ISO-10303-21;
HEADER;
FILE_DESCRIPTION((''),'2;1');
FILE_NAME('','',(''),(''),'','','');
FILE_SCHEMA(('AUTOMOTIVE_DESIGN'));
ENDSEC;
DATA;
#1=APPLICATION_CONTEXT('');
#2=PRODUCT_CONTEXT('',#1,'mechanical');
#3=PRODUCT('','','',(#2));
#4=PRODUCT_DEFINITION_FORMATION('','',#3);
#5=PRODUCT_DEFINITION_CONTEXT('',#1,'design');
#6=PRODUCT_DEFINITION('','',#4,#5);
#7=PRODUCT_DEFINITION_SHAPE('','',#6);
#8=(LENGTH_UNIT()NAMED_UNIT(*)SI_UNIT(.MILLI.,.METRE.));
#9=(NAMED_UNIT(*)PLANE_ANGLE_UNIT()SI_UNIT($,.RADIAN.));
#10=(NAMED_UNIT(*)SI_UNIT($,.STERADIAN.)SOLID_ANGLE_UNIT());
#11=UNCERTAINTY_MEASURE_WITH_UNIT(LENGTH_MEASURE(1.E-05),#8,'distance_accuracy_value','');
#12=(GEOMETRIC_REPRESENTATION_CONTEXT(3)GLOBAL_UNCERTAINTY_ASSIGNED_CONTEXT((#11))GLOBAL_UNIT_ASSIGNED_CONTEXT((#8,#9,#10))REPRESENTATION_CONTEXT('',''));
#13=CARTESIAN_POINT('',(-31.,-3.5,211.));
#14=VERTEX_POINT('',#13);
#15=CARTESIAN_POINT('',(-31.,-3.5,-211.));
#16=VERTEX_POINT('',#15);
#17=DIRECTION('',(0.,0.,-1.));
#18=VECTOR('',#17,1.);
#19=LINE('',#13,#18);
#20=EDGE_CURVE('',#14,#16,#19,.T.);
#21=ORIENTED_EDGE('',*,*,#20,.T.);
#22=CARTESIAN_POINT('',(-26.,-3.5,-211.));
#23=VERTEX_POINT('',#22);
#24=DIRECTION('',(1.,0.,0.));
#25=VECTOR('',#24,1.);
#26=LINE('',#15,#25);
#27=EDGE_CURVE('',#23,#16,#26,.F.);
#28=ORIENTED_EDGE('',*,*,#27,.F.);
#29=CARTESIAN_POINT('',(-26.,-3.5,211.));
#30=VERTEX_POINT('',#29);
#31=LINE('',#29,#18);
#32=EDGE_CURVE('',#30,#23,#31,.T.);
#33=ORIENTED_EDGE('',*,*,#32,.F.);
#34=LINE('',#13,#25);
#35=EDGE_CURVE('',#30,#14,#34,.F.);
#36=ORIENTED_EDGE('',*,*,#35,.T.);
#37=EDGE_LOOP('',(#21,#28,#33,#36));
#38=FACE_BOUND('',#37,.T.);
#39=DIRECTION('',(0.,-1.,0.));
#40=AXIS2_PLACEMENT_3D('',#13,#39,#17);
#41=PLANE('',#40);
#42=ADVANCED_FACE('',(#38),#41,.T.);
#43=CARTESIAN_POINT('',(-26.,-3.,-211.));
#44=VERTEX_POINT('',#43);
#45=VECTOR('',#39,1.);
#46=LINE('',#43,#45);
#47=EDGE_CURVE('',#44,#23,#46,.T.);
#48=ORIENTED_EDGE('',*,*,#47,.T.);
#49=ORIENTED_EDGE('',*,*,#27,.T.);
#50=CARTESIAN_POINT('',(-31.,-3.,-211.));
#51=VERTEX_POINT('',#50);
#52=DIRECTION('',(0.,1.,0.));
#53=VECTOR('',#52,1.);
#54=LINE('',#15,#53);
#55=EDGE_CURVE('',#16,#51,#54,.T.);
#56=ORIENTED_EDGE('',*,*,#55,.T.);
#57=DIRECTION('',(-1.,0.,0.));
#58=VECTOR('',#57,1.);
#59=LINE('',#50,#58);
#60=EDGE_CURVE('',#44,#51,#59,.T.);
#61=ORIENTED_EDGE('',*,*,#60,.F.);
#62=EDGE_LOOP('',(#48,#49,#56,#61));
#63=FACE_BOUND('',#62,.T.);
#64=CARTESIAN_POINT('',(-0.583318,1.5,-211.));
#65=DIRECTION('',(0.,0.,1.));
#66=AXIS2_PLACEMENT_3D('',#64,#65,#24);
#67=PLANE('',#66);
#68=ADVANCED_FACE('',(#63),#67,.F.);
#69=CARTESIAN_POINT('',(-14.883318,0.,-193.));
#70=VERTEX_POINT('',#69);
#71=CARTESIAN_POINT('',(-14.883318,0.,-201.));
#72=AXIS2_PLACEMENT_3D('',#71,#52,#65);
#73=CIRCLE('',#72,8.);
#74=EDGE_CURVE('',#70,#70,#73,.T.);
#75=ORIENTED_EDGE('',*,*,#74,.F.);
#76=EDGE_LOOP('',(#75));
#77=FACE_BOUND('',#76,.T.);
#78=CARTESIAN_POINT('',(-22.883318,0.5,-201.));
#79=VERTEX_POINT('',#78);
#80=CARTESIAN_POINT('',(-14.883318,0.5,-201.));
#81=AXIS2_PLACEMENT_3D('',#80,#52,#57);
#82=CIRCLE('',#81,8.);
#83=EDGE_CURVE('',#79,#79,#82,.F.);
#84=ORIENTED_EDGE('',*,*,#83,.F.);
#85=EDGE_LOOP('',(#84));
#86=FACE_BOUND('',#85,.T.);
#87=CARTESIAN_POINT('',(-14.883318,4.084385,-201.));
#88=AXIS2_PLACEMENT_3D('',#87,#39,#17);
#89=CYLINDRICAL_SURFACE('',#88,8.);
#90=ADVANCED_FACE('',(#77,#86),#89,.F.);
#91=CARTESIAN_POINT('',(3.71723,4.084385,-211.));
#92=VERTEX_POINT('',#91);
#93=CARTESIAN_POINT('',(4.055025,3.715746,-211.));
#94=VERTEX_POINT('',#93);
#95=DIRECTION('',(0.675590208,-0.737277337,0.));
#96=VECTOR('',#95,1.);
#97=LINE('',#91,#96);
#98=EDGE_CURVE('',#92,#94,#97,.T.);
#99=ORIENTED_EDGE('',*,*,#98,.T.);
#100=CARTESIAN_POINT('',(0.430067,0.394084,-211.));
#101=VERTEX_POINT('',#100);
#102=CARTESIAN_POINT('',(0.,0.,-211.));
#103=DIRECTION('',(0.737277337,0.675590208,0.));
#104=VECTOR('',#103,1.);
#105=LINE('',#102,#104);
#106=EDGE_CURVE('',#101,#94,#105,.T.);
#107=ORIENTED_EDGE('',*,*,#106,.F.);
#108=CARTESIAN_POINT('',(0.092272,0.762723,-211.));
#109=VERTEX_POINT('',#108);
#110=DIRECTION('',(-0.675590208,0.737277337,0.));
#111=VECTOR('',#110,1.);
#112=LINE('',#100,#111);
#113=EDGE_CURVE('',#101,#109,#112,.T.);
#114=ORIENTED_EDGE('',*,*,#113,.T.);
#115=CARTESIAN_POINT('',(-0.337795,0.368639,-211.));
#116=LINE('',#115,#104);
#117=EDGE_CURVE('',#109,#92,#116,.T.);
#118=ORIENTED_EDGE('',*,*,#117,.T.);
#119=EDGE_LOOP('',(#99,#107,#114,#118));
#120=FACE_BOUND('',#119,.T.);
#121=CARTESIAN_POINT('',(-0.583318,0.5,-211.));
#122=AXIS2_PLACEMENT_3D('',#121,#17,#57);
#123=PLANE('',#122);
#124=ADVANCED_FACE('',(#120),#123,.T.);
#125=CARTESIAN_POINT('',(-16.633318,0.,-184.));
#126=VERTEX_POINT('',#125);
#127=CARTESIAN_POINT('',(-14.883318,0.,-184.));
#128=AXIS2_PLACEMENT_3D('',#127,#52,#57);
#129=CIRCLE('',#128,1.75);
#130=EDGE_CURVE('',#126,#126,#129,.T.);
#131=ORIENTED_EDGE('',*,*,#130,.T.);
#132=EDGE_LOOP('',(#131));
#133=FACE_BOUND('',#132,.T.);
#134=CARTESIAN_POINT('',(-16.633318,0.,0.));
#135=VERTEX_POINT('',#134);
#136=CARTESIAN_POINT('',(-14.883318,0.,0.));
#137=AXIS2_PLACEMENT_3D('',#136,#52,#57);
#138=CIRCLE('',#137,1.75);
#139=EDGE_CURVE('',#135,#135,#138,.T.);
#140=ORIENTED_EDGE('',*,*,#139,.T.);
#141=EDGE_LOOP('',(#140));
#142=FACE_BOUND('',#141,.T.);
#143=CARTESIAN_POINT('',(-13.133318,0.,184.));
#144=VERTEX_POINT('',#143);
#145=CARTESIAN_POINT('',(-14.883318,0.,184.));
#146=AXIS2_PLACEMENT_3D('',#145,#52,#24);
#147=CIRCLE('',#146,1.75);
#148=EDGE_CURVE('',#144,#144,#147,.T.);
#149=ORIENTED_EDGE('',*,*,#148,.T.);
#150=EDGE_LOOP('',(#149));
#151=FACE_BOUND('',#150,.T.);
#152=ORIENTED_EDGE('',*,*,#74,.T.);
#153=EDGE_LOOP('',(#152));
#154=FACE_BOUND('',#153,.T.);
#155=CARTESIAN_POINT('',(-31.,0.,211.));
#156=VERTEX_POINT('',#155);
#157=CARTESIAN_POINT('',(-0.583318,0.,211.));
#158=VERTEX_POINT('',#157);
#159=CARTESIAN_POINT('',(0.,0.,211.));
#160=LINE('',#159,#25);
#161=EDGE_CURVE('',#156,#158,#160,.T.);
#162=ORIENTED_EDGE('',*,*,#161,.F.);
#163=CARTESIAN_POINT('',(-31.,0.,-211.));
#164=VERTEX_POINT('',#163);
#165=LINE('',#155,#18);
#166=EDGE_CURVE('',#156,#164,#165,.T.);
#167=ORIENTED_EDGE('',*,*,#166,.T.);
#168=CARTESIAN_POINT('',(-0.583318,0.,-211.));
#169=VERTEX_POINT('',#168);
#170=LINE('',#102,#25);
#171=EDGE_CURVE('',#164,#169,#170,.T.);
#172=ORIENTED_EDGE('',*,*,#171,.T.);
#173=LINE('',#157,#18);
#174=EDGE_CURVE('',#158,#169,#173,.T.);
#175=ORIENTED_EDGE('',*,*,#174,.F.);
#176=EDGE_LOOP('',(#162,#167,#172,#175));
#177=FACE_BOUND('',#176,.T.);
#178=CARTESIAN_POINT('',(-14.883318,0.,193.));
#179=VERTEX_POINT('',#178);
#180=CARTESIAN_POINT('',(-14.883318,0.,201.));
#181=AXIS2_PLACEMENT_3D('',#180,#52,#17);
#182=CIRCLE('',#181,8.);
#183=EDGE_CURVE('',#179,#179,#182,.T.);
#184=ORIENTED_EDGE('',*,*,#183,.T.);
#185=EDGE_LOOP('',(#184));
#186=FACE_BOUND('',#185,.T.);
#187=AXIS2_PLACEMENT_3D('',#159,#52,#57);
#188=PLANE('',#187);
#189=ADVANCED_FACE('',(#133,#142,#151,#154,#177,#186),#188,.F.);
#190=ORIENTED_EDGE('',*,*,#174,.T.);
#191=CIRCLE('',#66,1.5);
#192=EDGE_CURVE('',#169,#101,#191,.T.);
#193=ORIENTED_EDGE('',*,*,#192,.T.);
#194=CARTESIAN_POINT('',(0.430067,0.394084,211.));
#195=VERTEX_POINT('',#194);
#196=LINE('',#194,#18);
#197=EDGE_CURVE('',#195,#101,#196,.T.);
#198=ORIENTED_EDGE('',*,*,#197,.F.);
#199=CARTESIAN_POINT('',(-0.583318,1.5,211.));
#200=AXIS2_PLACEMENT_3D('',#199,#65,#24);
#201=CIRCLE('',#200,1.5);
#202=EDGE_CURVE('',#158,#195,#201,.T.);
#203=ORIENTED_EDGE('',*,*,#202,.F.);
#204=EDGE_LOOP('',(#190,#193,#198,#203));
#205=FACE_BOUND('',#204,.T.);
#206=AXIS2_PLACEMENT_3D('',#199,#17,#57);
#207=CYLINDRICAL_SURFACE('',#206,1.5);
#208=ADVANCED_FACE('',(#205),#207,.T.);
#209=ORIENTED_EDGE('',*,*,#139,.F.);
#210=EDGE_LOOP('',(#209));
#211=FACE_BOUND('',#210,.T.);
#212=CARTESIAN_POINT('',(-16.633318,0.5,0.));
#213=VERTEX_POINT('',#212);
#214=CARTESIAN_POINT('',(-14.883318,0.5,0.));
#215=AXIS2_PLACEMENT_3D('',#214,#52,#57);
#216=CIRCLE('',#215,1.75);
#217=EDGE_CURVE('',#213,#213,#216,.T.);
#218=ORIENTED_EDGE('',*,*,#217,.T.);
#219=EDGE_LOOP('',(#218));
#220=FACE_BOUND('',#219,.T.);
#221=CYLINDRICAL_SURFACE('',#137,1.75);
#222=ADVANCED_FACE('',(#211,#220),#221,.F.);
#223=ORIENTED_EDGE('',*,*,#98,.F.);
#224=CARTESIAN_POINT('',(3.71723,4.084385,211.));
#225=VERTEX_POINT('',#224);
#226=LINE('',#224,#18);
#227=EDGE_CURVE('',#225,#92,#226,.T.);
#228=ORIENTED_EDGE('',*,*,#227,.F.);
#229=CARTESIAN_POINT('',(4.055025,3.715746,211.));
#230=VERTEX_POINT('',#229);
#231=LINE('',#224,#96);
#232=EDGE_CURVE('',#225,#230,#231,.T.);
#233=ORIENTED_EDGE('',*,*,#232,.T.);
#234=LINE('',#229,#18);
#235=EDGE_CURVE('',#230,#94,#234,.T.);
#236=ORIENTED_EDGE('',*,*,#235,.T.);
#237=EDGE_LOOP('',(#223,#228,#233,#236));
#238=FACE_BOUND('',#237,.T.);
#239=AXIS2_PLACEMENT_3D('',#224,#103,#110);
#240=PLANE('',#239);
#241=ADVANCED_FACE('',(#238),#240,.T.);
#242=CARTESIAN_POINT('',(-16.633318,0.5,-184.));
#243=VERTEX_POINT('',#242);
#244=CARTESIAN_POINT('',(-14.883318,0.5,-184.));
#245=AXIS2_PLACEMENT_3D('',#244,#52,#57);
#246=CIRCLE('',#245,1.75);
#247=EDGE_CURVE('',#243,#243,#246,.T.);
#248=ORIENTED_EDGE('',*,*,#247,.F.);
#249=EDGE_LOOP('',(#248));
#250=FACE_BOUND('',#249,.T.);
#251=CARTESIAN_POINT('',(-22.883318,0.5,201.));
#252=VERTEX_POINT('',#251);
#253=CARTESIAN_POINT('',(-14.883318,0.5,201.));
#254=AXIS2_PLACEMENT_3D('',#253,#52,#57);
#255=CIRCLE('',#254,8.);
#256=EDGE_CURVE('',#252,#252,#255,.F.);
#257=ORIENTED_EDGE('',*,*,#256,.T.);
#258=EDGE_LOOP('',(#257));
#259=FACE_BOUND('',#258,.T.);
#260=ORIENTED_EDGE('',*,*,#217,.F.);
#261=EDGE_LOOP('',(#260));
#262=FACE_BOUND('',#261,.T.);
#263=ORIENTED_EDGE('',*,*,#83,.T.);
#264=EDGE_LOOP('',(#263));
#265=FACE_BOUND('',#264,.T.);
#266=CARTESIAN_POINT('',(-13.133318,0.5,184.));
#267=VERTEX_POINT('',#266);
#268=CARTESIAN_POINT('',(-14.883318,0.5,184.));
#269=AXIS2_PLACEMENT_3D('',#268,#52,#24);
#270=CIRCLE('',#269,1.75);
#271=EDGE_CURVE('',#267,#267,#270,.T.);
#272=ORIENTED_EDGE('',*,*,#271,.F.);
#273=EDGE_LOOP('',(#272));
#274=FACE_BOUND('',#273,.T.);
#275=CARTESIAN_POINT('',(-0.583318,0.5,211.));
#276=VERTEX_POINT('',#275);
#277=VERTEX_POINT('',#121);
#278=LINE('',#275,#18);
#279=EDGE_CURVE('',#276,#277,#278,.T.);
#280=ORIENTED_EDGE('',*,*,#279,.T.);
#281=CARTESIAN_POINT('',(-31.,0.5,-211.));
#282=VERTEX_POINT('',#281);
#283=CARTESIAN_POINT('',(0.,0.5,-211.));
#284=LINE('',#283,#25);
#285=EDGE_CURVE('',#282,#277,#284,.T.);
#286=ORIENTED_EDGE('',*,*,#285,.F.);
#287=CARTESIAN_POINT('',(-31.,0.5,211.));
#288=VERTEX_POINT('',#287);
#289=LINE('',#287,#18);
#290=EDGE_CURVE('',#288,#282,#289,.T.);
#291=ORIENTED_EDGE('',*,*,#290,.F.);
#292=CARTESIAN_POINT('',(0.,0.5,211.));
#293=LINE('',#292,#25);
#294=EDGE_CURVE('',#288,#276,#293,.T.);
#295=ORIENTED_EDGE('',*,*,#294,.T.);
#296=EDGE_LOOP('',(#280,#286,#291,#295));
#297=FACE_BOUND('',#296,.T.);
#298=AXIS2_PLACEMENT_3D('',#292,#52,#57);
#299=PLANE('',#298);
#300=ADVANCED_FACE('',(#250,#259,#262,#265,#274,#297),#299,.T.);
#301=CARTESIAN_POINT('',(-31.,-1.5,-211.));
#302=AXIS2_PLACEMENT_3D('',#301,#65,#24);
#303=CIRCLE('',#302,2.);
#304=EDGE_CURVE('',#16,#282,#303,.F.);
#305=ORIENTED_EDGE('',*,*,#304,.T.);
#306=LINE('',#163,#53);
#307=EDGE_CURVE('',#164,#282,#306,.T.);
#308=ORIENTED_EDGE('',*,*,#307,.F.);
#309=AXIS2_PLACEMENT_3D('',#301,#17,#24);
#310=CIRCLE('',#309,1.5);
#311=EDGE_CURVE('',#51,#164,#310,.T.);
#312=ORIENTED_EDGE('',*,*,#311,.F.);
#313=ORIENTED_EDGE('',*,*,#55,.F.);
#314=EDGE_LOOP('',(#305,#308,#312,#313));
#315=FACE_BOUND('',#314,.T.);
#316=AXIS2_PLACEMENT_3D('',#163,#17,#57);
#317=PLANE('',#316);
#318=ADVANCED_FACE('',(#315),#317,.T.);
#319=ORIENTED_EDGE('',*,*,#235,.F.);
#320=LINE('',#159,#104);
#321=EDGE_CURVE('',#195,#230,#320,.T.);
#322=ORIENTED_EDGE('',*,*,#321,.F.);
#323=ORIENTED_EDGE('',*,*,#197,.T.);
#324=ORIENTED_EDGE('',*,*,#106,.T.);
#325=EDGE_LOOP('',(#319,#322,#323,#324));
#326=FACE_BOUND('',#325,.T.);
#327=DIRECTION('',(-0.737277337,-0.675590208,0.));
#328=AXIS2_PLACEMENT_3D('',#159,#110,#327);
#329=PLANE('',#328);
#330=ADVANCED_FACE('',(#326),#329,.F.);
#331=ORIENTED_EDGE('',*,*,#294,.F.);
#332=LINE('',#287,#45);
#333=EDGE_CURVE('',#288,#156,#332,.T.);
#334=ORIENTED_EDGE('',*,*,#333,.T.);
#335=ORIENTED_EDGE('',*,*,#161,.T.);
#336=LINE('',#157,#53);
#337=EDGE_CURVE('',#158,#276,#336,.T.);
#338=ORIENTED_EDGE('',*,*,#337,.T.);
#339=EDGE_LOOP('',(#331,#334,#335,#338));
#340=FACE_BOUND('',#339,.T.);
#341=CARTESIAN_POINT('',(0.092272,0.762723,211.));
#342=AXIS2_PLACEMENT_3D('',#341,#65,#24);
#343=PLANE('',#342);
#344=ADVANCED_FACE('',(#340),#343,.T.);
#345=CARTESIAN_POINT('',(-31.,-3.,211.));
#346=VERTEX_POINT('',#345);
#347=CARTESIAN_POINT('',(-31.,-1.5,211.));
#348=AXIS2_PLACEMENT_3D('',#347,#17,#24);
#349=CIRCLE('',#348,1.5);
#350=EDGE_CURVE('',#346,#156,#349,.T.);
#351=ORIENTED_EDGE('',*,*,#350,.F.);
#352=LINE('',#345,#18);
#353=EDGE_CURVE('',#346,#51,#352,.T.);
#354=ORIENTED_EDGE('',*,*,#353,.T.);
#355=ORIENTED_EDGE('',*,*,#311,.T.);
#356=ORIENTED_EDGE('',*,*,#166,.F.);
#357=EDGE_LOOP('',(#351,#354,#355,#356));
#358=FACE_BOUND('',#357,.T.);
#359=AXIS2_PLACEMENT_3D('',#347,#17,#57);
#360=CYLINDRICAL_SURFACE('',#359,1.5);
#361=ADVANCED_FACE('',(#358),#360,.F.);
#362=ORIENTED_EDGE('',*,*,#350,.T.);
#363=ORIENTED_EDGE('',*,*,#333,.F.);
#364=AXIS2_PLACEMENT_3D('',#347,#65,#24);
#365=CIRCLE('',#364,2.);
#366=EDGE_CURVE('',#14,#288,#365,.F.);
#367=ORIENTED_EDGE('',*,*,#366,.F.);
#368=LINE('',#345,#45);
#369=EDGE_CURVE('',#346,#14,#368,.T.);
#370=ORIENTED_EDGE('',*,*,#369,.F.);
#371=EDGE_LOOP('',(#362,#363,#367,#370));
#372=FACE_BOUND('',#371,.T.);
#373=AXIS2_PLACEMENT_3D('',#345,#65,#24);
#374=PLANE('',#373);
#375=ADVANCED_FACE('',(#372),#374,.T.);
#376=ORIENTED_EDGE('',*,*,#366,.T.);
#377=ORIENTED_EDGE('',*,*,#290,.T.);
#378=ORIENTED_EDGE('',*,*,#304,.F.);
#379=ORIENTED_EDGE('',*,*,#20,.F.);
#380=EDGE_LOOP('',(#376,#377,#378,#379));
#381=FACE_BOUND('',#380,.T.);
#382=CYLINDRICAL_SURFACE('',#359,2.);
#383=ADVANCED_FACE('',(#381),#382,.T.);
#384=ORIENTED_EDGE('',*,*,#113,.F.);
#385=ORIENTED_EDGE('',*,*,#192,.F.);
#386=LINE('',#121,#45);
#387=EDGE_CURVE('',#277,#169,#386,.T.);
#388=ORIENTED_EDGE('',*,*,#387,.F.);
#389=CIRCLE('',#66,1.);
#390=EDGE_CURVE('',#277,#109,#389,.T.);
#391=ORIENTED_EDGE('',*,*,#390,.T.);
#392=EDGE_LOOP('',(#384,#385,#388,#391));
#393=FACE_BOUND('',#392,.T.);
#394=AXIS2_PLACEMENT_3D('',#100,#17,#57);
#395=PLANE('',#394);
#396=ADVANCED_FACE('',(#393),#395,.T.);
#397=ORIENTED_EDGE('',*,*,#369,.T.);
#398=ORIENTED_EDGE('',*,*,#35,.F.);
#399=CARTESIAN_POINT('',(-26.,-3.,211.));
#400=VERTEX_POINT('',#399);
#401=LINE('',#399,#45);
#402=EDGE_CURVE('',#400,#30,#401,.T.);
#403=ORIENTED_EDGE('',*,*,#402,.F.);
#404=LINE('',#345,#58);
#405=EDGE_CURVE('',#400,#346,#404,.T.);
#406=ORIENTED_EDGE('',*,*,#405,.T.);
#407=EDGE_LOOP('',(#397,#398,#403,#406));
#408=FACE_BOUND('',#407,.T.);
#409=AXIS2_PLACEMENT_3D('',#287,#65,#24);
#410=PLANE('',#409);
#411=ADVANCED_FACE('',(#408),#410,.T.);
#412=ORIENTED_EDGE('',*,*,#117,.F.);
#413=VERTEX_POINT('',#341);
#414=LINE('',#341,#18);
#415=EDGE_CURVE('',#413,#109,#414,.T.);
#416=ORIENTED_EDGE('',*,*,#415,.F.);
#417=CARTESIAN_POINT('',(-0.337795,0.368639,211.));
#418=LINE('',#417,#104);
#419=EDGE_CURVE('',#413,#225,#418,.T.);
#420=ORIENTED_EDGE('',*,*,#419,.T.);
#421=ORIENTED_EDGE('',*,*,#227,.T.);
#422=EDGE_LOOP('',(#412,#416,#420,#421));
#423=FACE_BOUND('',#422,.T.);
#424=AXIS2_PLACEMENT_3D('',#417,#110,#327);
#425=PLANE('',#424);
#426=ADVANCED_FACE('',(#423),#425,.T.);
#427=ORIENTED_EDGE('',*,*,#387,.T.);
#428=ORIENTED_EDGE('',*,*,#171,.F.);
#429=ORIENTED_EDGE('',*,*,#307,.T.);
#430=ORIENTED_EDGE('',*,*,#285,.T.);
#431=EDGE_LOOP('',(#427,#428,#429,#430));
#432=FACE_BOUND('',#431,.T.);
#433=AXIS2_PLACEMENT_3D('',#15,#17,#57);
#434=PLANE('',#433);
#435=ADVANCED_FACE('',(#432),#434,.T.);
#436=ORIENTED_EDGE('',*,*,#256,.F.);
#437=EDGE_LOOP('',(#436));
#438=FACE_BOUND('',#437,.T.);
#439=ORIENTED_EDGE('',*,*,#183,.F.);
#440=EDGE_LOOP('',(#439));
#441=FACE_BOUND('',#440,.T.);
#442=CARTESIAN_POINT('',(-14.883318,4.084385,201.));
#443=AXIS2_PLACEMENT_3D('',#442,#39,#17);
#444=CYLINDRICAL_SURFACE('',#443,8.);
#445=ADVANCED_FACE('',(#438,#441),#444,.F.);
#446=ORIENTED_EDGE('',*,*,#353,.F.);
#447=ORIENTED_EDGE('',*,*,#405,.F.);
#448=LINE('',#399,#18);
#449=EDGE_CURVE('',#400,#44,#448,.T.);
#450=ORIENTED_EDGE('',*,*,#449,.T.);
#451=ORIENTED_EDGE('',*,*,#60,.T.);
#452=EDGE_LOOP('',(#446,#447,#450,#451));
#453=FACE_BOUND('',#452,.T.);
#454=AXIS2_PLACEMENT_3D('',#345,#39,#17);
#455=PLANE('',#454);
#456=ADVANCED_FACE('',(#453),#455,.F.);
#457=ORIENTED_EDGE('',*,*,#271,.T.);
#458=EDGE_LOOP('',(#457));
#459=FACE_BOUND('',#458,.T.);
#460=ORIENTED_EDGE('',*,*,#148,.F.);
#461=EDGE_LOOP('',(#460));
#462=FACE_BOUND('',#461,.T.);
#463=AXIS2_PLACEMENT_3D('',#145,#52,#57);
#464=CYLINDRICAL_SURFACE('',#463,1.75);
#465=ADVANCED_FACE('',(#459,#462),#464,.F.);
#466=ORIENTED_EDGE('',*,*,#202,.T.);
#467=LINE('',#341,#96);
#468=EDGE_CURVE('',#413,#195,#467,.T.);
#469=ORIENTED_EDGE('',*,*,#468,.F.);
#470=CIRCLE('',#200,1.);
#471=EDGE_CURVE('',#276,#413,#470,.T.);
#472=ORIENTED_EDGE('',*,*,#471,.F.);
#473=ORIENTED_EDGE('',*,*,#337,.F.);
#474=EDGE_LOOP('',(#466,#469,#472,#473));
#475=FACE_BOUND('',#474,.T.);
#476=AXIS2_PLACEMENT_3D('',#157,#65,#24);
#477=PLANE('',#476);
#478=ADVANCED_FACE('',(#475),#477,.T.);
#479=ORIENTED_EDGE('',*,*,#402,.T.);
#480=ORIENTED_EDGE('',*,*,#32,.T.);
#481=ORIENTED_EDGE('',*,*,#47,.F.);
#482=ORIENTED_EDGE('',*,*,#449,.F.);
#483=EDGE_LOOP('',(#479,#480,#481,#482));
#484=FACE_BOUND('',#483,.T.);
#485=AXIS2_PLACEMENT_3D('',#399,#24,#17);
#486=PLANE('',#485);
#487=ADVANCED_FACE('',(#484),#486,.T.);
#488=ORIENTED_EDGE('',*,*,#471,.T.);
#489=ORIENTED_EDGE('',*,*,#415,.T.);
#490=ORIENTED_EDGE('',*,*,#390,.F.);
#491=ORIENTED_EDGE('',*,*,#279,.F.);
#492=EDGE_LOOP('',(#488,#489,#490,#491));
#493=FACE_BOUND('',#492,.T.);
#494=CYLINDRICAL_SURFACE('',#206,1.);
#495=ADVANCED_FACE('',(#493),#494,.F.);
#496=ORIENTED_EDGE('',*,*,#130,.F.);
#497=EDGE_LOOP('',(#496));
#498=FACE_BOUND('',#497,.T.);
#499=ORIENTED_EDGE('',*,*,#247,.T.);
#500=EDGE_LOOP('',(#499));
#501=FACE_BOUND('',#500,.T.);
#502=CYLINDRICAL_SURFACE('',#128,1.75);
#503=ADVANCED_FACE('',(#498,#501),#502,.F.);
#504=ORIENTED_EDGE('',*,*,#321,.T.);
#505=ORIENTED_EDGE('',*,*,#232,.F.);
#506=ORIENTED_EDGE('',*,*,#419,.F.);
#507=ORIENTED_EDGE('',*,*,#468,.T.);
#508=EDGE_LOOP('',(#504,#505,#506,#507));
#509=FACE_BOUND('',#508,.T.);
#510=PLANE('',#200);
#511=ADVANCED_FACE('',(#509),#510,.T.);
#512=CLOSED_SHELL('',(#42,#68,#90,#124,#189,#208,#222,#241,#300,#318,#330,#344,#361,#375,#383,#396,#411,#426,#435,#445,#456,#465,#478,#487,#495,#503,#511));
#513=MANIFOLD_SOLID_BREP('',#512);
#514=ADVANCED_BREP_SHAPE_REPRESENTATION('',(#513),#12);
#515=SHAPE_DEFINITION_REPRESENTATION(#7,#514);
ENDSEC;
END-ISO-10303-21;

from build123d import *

# Parameters (mm, degrees)
BASE_FLANGE1_DEPTH = 211
SKETCH2_R          = 8
EXTRUDE2_DEPTH     = 214.604031327
SKETCH3_R          = 1.75
EXTRUDE3_DEPTH     = 0.5
SKETCH4_R          = 1.75
EXTRUDE4_DEPTH     = 0.5


# Sheet-metal steps are written as plain solids
with BuildPart() as part:
    # Sketch1 → Base-Flange1 (new, symmetric)
    with BuildSketch(Plane.XY):
        with BuildLine():
            Line((4.055025352, 3.715746142), (0.430067214, 0.394083995))
            ThreePointArc((0.430067214, 0.394083995), (-0.03966104, 0.101988196), (-0.583318098, 0))
            Line((-0.583318098, 0), (-31, 0))
            ThreePointArc((-31, 0), (-32.5, -1.5), (-31, -3))
            Line((-31, -3), (-26, -3))
            Line((-26, -3), (-26, -3.5))
            Line((-26, -3.5), (-31, -3.5))
            ThreePointArc((-31, -3.5), (-33, -1.5), (-31, 0.5))
            Line((-31, 0.5), (-0.583318098, 0.5))
            ThreePointArc((-0.583318098, 0.5), (-0.220880059, 0.567992131), (0.09227211, 0.762722663))
            Line((0.09227211, 0.762722663), (3.717230249, 4.08438481))
            Line((3.717230249, 4.08438481), (4.055025352, 3.715746142))
        make_face()
    extrude(amount=BASE_FLANGE1_DEPTH, both=True)

    # Sketch2 → Extrude2 (cut, through all)
    with BuildSketch(Plane(origin=(0, 0, 0), x_dir=(1, 0, 0), z_dir=(0, 1, 0))):
        with Locations(Location((-14.883318098, 201, 0), (0, 0, 180))):
            Circle(SKETCH2_R)
        with Locations(Location((-14.883318098, -201, 0), (0, 0, 90))):
            Circle(SKETCH2_R)
    extrude(amount=EXTRUDE2_DEPTH, mode=Mode.SUBTRACT)

    # Sketch3 → Extrude3 (cut)
    with BuildSketch(Plane(origin=(0, 0.5, 0), x_dir=(1, 0, 0), z_dir=(0, 1, 0))):
        with Locations(Location((-14.883318098, 0, 0), (0, 0, 180))):
            Circle(SKETCH3_R)
    extrude(amount=-EXTRUDE3_DEPTH, mode=Mode.SUBTRACT)

    # Sketch4 → Extrude4 (cut)
    with BuildSketch(Plane(origin=(0, 0.5, 0), x_dir=(1, 0, 0), z_dir=(0, 1, 0))):
        with Locations(Location((-14.883318098, 184, 0), (0, 0, 180))):
            Circle(SKETCH4_R)
        with Locations((-14.883318098, -184)):
            Circle(SKETCH4_R)
    extrude(amount=-EXTRUDE4_DEPTH, mode=Mode.SUBTRACT)


solid = part.part
